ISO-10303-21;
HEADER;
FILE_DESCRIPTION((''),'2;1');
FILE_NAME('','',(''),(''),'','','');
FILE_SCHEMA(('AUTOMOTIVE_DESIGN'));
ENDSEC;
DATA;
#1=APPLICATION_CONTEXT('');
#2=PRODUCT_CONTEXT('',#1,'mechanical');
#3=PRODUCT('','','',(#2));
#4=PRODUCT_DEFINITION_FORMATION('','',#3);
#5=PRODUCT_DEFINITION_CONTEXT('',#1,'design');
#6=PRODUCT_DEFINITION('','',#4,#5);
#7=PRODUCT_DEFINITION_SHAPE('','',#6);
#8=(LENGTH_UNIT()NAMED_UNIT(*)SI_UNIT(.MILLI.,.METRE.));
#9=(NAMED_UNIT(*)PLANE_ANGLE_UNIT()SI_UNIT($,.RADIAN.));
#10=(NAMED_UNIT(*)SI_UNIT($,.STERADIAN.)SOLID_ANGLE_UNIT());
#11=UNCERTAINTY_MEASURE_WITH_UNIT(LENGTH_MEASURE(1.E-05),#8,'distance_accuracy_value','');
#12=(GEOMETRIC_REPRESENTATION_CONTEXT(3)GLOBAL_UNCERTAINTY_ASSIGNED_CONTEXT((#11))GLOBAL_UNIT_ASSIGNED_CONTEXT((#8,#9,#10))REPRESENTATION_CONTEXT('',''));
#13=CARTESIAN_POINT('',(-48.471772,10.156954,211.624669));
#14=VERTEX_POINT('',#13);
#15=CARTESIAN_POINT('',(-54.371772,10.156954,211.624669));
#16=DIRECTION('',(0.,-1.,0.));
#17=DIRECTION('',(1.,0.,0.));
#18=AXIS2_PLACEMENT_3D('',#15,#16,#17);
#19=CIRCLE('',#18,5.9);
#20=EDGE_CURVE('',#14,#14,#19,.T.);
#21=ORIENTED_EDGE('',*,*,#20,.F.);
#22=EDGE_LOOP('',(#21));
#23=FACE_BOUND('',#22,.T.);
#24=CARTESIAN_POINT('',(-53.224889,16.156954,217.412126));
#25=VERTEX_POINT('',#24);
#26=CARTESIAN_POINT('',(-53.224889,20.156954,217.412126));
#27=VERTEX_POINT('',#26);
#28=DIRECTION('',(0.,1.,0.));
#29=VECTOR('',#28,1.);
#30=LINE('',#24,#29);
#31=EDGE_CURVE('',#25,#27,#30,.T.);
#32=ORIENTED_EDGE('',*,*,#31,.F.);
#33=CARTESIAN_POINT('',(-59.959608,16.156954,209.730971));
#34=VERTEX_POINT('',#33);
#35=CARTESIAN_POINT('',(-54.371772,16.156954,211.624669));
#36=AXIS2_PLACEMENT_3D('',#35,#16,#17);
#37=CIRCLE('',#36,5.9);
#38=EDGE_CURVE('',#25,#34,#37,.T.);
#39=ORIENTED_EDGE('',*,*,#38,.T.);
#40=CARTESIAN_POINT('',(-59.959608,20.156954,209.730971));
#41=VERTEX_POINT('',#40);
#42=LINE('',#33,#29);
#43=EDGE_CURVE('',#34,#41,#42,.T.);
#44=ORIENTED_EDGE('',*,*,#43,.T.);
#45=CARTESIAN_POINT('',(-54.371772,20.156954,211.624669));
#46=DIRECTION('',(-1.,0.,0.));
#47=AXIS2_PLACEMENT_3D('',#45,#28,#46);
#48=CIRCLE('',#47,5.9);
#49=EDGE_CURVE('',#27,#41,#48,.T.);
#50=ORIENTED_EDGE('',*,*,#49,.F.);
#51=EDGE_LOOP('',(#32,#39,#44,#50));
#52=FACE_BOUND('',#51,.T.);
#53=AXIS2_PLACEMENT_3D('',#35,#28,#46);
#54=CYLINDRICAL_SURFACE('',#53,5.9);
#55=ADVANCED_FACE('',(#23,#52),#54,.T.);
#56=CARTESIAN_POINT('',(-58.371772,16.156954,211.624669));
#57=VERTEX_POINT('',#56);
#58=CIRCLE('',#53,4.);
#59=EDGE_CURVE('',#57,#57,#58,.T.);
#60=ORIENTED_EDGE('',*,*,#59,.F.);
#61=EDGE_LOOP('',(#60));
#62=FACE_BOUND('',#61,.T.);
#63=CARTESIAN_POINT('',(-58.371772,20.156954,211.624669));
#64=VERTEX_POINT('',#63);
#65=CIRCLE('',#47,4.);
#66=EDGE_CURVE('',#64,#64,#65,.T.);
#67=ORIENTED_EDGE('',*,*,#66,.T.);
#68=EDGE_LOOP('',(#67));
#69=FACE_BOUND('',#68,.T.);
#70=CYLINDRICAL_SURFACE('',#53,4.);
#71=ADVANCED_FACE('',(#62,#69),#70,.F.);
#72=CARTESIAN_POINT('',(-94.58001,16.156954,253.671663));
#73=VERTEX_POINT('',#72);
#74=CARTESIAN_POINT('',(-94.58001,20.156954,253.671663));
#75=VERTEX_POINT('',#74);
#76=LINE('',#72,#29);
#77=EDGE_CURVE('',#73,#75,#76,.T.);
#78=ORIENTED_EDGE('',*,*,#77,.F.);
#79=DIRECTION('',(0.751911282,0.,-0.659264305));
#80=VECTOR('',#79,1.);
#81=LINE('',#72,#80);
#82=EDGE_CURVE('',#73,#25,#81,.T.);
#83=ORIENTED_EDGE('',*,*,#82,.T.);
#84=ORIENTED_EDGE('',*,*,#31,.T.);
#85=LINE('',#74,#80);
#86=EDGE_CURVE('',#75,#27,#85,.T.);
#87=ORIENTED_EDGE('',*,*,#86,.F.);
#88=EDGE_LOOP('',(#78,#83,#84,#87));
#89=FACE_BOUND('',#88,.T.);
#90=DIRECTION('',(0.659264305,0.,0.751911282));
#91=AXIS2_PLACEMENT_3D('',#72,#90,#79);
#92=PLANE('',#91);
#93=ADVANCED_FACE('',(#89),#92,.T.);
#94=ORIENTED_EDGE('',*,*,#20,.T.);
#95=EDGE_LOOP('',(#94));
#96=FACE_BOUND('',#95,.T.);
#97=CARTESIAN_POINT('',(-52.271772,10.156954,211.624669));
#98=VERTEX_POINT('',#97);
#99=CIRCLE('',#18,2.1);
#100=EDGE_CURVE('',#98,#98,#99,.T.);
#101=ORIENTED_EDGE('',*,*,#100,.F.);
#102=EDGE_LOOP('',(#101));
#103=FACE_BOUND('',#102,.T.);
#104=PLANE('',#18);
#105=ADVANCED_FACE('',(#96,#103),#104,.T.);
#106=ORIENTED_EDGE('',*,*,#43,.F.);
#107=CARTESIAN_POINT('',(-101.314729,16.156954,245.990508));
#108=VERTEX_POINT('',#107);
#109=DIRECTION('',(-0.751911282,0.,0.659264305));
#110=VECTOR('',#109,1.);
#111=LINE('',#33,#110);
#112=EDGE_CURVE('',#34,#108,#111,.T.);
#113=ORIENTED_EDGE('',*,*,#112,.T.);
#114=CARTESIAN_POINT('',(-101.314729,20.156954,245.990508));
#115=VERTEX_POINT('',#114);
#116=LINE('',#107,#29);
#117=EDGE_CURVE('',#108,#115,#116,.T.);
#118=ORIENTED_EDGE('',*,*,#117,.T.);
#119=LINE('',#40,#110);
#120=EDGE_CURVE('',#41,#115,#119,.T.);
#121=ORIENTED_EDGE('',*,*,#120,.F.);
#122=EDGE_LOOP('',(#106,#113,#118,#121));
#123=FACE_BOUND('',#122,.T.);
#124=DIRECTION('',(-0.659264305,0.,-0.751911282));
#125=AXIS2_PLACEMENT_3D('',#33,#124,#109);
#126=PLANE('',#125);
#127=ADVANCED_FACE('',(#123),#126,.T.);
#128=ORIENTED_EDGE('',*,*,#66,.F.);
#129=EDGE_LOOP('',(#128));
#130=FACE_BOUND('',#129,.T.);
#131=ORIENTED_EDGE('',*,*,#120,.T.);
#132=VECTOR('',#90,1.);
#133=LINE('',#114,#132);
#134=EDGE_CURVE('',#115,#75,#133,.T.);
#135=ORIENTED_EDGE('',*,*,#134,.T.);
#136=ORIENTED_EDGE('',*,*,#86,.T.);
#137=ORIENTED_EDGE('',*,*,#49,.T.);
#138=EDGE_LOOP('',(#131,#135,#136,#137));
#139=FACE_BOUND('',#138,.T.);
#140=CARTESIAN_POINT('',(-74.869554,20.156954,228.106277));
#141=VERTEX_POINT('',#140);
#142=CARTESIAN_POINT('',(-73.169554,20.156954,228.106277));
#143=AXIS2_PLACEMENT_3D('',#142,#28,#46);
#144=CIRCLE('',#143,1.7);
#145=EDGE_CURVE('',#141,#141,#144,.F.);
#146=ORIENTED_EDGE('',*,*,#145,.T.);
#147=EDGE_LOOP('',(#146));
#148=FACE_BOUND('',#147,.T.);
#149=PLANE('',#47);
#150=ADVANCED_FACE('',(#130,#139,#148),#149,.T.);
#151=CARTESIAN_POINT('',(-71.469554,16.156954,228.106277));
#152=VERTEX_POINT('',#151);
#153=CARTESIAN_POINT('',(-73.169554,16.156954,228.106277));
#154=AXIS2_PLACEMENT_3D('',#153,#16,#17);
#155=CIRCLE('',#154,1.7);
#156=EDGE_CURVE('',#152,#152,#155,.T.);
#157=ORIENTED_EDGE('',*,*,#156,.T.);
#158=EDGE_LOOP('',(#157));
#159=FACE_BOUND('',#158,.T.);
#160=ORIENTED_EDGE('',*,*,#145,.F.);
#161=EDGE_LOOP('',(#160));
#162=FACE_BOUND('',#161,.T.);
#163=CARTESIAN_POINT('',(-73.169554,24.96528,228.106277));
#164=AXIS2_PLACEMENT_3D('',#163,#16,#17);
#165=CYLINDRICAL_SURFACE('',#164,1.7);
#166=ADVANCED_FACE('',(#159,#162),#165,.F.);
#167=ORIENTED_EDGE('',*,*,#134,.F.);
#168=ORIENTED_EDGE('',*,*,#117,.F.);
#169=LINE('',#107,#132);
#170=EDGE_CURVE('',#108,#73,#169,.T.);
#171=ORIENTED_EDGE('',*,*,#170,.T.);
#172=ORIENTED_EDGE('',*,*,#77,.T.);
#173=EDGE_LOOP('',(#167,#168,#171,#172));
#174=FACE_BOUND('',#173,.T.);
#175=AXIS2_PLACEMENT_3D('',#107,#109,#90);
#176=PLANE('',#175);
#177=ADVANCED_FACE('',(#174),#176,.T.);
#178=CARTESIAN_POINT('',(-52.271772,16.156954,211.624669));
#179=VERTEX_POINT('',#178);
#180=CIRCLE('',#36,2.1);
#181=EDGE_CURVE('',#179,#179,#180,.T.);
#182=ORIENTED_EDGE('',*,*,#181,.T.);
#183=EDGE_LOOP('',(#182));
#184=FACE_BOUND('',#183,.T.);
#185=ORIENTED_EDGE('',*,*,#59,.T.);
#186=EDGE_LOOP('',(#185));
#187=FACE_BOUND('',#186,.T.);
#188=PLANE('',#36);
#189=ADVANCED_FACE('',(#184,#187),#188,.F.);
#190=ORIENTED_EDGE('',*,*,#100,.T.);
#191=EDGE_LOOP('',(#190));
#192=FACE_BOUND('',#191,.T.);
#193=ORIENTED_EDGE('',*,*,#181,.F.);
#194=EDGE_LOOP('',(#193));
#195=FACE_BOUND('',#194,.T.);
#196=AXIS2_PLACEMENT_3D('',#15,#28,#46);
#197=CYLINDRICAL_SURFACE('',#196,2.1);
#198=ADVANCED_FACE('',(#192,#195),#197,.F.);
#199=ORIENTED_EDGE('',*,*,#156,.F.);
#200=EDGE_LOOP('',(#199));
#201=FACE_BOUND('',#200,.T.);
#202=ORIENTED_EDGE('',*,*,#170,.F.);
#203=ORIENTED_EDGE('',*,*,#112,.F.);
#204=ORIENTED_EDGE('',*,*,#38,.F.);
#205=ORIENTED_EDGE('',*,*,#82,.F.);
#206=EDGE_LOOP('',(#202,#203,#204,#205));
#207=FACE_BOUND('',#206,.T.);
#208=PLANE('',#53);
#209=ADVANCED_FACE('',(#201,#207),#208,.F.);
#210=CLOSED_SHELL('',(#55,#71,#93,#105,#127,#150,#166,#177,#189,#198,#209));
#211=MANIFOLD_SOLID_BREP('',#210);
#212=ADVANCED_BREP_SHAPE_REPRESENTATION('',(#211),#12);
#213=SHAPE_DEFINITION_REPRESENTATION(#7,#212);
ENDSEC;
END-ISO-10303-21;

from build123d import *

# Parameters (mm, degrees)
EXTRUDE_START       = -4
EXTRUDE_1_OUTLINE_R = 4
EXTRUDE_1_DEPTH     = 4
EXTRUDE_START_2     = 6
SKETCH_2_R          = 5.9
SKETCH_2_R_2        = 2.1
EXTRUDE_2_DEPTH     = 6
SKETCH_3_R          = 1.7
CUT_EXTRUDE_1_DEPTH = 4


# Read off the part's stored shape, not the designer's step: 填料-伸長1
with BuildPart() as part:
    # 填料-伸長1 outline → 填料-伸長1 (new body)
    with BuildSketch(Plane(origin=(0, 20.156954032, 0), x_dir=(1, 0, 0), z_dir=(0, 1, 0)).offset(EXTRUDE_START)):
        with BuildLine():
            Line((-94.580009895, -253.67166291), (-53.224889363, -217.412126153))
            ThreePointArc((-53.224889363, -217.412126153), (-49.935495794, -207.73500968), (-59.959608209, -209.730971497))
            Line((-59.959608209, -209.730971497), (-101.314728741, -245.990508253))
            Line((-101.314728741, -245.990508253), (-94.580009895, -253.67166291))
        make_face()
        with Locations((-54.371772361, -211.624669079)):
            Circle(EXTRUDE_1_OUTLINE_R, mode=Mode.SUBTRACT)
    extrude(amount=EXTRUDE_1_DEPTH)

    # 草圖2 → 填料-伸長2 (add)
    with BuildSketch(Plane.XZ.offset(-16.156954032).offset(EXTRUDE_START_2)):
        with Locations(Location((-54.371772361, 211.624669079, 0), (0, 0, 198.721335886))):
            Circle(SKETCH_2_R)
        with Locations((-54.371772361, 211.624669079)):
            Circle(SKETCH_2_R_2, mode=Mode.SUBTRACT)
    extrude(amount=-EXTRUDE_2_DEPTH)

    # 草圖3 → 除料-伸長1 (cut)
    with BuildSketch(Plane.XZ.offset(-16.156954032)):
        with Locations((-73.169554421, 228.106276695)):
            Circle(SKETCH_3_R)
    extrude(amount=-CUT_EXTRUDE_1_DEPTH, mode=Mode.SUBTRACT)


solid = part.part
